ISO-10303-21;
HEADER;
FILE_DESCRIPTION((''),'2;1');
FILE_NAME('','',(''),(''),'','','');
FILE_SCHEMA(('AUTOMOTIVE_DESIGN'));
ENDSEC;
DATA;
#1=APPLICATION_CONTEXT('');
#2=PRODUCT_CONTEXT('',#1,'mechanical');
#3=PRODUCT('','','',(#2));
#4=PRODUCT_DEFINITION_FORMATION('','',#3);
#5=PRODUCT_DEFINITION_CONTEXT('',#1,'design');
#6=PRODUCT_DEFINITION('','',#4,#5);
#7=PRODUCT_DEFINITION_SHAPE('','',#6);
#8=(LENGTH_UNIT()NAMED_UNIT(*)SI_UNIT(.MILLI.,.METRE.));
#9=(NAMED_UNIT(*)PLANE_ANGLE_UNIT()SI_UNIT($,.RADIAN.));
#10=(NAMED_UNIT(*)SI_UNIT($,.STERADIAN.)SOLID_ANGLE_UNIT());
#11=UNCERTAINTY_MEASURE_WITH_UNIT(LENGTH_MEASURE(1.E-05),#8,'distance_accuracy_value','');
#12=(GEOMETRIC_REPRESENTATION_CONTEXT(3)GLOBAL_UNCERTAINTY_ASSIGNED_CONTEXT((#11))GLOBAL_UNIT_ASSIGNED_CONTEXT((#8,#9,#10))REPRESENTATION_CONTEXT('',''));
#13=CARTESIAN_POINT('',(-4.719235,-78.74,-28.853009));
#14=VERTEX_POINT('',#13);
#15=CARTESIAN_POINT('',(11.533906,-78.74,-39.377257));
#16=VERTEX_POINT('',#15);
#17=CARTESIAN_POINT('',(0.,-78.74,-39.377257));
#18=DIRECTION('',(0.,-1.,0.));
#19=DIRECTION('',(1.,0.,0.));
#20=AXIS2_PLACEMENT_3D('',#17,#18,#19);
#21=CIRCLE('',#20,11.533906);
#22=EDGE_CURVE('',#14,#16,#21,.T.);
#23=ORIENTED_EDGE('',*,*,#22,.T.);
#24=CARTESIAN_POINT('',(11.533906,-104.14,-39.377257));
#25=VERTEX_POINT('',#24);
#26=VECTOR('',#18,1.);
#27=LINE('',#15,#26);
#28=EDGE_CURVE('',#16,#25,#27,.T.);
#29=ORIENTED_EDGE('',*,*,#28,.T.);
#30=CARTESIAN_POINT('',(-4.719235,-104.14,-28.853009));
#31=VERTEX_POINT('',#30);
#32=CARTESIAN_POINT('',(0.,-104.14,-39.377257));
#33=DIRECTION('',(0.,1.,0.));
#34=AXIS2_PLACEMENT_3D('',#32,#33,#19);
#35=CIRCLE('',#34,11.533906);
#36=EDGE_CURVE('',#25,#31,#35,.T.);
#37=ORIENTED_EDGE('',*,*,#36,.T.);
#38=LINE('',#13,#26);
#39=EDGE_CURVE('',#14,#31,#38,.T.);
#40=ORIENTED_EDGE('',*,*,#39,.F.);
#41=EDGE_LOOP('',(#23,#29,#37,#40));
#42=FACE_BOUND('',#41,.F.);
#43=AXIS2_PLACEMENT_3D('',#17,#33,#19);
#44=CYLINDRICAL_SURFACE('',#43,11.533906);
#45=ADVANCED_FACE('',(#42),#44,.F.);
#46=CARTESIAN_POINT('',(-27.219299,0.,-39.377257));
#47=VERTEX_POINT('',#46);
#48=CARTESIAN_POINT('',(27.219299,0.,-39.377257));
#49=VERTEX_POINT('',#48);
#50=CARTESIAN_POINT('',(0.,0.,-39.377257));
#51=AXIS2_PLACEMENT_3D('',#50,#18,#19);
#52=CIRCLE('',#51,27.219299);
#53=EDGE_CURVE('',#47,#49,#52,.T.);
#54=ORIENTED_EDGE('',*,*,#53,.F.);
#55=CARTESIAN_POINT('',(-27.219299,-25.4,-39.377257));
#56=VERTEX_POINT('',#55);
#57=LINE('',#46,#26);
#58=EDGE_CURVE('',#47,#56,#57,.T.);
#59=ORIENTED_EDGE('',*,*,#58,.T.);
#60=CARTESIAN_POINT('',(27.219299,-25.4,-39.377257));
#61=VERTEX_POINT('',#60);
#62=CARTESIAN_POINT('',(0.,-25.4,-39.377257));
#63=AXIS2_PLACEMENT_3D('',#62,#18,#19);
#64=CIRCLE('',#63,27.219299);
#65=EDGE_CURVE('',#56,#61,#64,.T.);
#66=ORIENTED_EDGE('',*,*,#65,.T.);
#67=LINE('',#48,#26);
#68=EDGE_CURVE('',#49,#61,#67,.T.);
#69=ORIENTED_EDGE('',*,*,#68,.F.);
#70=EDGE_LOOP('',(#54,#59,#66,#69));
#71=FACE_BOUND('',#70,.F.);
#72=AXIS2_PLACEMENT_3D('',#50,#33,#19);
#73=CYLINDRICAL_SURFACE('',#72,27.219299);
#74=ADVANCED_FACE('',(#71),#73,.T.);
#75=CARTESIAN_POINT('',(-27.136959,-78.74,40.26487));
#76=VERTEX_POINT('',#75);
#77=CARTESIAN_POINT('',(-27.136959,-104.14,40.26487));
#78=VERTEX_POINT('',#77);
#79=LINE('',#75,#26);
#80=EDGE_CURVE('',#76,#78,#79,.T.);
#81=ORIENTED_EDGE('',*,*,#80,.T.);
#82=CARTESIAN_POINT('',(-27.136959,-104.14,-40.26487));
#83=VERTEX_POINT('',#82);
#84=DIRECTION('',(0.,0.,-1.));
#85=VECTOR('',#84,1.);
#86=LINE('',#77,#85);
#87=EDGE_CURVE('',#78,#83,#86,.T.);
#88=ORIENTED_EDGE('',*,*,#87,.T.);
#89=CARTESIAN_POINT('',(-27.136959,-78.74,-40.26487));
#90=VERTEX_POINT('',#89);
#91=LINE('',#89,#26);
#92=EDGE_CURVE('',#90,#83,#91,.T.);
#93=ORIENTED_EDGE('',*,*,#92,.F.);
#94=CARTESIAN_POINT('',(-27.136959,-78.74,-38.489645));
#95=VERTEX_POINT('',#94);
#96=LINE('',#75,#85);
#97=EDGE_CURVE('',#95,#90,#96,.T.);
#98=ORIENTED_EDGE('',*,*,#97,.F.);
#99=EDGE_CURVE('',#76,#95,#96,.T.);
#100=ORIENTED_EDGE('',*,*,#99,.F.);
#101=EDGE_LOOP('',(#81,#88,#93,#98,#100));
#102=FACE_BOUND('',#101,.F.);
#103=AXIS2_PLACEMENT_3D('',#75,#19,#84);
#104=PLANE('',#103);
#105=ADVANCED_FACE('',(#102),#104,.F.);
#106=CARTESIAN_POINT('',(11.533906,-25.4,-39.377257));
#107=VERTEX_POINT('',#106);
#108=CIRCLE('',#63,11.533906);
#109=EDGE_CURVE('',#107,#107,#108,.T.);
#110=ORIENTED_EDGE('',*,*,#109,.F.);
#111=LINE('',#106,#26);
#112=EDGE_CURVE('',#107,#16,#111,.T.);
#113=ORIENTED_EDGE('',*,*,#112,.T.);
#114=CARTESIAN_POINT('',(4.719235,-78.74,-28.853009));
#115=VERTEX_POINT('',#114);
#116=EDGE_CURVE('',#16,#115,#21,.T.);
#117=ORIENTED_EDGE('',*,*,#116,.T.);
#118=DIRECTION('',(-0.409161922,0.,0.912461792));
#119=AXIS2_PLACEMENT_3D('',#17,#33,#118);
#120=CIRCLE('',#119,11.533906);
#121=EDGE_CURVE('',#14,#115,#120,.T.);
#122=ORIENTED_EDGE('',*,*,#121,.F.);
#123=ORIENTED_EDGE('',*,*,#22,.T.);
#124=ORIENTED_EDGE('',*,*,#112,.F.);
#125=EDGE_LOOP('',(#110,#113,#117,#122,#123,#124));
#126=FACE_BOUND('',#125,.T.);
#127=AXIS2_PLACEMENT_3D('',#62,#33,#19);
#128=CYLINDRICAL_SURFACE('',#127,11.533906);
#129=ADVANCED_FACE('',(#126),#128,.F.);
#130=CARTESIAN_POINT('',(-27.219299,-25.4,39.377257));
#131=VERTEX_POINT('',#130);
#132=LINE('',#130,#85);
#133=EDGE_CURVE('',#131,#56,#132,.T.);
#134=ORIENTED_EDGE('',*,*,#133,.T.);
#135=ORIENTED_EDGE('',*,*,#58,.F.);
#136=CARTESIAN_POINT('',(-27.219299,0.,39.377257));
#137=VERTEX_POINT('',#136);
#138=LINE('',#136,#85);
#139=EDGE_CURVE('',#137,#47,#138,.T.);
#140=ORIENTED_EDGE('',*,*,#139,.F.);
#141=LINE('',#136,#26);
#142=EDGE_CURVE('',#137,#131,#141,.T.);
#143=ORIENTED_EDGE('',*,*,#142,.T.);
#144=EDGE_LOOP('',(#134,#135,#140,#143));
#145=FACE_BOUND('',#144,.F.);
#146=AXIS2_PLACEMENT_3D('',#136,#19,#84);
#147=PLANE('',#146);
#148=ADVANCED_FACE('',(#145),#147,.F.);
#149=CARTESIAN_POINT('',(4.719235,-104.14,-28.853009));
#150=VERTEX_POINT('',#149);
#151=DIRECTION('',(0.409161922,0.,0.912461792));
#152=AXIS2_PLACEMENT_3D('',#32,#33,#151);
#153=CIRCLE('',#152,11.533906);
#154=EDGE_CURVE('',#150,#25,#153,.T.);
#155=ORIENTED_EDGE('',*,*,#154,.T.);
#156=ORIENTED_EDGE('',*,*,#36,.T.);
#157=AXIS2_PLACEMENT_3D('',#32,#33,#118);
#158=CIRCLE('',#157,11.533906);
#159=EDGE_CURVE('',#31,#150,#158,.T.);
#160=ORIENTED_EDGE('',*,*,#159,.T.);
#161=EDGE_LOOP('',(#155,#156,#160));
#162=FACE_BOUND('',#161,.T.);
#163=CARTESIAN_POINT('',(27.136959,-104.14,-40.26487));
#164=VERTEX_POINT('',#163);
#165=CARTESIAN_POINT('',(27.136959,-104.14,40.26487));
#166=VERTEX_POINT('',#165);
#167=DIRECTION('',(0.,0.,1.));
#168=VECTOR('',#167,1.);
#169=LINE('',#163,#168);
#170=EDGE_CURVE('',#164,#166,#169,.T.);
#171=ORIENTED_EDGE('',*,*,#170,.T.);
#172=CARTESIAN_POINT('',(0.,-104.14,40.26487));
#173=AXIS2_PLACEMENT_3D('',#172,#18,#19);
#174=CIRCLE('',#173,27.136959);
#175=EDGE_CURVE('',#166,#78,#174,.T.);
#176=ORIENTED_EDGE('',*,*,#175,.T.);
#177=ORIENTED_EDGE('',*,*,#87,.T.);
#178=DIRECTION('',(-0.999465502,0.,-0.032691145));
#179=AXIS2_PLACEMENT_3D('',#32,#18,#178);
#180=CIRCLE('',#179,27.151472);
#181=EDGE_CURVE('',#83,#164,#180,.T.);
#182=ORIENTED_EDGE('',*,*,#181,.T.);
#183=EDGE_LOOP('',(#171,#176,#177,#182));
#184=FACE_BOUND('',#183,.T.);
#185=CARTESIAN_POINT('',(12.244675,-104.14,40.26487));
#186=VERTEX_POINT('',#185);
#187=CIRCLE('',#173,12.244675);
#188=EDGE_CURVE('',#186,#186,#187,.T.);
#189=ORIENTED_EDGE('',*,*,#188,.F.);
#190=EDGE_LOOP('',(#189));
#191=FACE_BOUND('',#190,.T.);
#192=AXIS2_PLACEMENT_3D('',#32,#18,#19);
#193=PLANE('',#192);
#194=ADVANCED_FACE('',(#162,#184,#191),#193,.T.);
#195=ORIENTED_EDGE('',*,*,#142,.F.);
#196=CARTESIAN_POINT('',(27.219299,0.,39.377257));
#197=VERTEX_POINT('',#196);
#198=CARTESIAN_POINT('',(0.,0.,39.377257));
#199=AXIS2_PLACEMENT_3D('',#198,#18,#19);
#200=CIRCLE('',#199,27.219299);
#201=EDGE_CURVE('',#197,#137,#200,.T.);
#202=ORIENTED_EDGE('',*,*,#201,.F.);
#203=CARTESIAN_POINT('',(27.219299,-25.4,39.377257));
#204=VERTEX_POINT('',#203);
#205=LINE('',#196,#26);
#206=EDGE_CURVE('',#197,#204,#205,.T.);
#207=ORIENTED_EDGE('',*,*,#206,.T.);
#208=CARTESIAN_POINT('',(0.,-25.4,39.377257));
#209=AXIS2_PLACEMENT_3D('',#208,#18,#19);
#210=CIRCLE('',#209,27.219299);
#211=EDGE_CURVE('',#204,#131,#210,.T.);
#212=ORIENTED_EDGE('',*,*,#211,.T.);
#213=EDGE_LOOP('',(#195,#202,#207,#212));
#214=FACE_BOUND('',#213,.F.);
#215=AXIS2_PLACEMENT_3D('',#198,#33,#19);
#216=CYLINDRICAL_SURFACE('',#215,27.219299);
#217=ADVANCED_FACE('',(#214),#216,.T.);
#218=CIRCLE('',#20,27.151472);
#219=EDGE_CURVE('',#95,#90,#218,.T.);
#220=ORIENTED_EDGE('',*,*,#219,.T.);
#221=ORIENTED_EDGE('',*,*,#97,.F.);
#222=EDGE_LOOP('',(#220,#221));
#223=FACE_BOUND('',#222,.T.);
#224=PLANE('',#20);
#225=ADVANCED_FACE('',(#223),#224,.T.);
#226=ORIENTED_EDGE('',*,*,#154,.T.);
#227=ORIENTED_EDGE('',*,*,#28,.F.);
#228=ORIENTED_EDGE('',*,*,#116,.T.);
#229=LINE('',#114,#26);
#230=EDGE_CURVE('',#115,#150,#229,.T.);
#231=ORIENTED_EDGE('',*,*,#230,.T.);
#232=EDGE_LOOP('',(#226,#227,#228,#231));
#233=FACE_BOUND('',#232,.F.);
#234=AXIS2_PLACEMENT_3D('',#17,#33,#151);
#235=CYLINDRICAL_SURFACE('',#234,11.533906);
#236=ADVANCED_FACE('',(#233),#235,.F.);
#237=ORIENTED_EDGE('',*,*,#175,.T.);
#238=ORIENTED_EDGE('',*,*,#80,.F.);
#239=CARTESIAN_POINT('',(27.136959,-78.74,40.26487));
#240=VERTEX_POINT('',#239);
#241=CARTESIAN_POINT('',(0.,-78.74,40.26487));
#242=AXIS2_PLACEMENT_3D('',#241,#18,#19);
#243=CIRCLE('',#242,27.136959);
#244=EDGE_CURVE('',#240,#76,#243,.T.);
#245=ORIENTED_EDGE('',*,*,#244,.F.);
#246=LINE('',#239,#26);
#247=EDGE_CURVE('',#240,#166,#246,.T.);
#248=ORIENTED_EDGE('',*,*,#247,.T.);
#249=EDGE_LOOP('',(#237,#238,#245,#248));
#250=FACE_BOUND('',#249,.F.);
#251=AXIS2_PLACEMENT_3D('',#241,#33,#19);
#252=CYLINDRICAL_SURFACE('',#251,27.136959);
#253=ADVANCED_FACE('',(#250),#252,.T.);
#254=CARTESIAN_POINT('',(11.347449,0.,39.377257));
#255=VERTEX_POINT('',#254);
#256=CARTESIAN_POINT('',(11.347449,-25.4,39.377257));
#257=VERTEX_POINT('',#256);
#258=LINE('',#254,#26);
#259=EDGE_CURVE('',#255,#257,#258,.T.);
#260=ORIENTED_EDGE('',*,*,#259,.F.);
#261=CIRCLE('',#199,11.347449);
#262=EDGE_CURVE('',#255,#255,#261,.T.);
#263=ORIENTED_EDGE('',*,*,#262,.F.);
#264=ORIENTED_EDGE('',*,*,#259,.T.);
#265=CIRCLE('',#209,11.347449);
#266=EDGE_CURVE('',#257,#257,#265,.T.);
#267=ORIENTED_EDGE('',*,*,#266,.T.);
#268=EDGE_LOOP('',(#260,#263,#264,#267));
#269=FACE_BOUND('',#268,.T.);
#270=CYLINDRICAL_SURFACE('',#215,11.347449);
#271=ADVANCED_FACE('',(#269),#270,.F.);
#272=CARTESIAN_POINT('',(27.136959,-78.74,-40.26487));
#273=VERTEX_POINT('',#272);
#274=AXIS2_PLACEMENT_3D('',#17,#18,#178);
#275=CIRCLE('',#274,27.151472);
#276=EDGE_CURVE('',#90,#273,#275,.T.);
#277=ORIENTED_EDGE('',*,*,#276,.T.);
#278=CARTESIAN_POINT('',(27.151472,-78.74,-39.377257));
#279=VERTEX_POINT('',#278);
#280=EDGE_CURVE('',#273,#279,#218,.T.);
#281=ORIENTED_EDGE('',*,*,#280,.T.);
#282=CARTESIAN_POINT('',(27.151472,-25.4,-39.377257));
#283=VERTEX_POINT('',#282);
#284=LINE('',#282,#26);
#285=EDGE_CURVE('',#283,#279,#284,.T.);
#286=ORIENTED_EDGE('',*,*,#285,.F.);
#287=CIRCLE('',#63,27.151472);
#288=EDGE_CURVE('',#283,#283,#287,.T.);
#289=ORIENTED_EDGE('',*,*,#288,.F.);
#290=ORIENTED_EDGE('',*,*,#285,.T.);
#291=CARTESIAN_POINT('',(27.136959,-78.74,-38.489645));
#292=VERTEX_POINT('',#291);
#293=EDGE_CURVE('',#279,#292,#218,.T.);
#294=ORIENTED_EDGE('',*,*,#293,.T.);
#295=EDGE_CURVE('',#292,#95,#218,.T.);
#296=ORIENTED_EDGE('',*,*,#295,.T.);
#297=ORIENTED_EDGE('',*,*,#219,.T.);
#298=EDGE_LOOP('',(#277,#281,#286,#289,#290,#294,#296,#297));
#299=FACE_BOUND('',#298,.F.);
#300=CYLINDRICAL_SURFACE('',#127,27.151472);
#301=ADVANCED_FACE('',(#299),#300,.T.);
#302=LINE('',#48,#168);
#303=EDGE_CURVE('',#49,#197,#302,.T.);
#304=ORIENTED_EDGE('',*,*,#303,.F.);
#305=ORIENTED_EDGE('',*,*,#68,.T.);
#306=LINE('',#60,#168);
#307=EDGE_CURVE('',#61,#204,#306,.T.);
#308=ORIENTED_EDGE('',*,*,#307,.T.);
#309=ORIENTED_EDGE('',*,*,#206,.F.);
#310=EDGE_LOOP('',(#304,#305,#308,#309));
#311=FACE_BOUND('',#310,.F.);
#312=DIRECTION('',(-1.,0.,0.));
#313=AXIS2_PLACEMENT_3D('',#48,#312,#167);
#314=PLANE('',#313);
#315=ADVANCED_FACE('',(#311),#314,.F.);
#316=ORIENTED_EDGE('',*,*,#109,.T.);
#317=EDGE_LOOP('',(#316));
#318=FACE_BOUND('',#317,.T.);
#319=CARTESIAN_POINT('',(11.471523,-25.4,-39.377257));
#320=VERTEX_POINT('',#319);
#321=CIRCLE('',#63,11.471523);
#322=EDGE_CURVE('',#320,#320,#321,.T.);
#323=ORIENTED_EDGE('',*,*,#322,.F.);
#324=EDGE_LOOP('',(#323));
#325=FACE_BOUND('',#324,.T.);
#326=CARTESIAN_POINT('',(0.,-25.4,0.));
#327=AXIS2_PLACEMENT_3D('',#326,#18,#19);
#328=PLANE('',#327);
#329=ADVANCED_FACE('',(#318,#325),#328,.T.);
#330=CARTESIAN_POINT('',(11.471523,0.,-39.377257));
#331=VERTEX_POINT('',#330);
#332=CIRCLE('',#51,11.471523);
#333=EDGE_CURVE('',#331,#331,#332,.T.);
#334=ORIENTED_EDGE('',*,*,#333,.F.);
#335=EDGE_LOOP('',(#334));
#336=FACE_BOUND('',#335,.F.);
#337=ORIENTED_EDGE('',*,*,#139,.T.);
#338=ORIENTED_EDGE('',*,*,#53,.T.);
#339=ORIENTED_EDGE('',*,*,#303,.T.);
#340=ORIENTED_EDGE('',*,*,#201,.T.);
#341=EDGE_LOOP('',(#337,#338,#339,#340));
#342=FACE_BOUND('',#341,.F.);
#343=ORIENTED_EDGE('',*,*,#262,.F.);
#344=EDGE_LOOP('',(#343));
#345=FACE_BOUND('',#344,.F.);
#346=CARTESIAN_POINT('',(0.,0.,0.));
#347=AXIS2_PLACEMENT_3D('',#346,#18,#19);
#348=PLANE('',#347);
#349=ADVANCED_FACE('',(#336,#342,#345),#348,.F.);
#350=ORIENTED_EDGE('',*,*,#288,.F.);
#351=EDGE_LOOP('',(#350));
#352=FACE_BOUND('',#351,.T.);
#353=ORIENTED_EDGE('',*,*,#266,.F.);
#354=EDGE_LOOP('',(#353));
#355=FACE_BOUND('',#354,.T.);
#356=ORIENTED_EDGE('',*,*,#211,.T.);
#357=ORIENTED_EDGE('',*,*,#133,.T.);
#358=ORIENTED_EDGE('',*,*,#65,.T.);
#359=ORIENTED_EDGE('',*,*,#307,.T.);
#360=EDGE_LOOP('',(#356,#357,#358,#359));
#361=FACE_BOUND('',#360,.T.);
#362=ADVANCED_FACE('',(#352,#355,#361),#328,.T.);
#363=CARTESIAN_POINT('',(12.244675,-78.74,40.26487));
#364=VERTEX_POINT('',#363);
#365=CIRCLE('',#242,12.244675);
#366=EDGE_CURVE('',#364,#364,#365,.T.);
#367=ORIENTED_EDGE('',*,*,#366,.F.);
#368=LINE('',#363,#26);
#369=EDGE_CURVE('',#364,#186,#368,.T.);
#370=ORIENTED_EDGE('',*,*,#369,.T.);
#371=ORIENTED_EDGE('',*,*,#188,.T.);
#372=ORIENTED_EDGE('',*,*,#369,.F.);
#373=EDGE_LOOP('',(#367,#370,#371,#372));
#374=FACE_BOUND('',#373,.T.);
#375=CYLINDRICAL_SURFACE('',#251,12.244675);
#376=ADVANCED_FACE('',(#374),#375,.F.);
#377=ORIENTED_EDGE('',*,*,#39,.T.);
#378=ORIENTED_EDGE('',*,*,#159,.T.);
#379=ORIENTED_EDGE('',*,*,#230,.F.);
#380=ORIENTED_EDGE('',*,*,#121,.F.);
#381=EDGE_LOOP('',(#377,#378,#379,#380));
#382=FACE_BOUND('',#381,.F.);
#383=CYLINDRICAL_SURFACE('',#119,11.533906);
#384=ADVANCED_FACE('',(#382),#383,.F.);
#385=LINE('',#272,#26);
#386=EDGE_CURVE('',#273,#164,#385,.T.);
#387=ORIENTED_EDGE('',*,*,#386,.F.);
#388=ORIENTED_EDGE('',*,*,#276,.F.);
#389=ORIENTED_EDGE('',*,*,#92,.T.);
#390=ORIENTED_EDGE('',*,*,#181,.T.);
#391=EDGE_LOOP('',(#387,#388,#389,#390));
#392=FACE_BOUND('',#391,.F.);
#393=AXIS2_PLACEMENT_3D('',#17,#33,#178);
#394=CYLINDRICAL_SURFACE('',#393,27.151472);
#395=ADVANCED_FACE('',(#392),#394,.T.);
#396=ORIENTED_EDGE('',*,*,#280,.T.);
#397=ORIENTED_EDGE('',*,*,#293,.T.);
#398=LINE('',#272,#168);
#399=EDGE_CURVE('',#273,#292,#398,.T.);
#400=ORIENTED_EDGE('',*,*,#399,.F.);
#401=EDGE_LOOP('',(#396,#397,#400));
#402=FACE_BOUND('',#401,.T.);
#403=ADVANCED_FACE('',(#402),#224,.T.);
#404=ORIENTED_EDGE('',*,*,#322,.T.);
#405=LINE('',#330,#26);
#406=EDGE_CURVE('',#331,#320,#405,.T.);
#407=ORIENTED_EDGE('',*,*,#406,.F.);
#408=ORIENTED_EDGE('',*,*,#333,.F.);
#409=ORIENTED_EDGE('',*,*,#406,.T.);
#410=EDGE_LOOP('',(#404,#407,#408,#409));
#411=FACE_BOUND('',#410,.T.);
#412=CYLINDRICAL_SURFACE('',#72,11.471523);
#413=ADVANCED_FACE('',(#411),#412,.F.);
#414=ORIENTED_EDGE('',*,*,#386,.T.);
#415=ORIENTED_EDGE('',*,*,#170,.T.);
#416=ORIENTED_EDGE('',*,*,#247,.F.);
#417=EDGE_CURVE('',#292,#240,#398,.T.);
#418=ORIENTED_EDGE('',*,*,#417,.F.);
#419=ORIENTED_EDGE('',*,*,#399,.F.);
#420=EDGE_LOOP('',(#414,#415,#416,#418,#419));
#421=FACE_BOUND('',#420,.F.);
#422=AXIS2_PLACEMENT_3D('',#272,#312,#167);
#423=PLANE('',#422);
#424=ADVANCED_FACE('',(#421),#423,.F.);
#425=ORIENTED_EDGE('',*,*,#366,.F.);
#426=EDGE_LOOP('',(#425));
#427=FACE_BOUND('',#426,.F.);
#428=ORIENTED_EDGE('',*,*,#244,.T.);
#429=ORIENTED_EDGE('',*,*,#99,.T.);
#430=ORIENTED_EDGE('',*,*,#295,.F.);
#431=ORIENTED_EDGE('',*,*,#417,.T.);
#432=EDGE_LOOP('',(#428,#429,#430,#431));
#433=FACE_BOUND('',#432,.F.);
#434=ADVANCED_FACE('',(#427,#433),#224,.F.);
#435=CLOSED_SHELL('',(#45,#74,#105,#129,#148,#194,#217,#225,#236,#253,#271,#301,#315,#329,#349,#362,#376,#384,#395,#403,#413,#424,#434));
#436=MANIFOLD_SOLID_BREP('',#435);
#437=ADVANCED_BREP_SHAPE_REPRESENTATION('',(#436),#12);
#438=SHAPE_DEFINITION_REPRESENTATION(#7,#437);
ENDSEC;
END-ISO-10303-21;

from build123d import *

# Parameters (mm, degrees)
F0_R     = 11.4715226447
F0_R_2   = 11.3474489307
F1_DEPTH = 25.4
F2_R     = 27.1514716213
F2_R_2   = 11.5339058998
F3_DEPTH = 53.34
F4_R     = 12.2446750111
F5_DEPTH = 25.4


with BuildPart() as f1:
    # F0 (on Front) → F1 (new body)
    with BuildSketch(Plane.XZ):
        with BuildLine():
            ThreePointArc((-27.219299227, -39.3772572279), (0, -12.1579580009), (27.219299227, -39.3772572279))
            Line((27.219299227, -39.3772572279), (27.219299227, 39.3772572279))
            ThreePointArc((27.219299227, 39.3772572279), (0, 12.1579580009), (-27.219299227, 39.3772572279))
            Line((-27.219299227, 39.3772572279), (-27.219299227, -39.3772572279))
        make_face()
        with BuildLine():
            ThreePointArc((-27.219299227, -39.3772572279), (0, -66.5965564549), (27.219299227, -39.3772572279))
            ThreePointArc((27.219299227, -39.3772572279), (0, -12.1579580009), (-27.219299227, -39.3772572279))
        make_face()
        with Locations((0, -39.3772572279)):
            Circle(F0_R, mode=Mode.SUBTRACT)
        with BuildLine():
            ThreePointArc((-27.219299227, 39.3772572279), (0, 12.1579580009), (27.219299227, 39.3772572279))
            ThreePointArc((27.219299227, 39.3772572279), (0, 66.5965564549), (-27.219299227, 39.3772572279))
        make_face()
        with Locations((0, 39.3772572279)):
            Circle(F0_R_2, mode=Mode.SUBTRACT)
    extrude(amount=F1_DEPTH)

    # F2 (on face) → F3 (join)
    with BuildSketch(Plane.XZ.offset(25.4)):
        with Locations((0, -39.3772572279)):
            Circle(F2_R)
        with Locations((0, -39.3772572279)):
            Circle(F2_R_2, mode=Mode.SUBTRACT)
    extrude(amount=F3_DEPTH)

    # F4 (on face) → F5 (join)
    with BuildSketch(Plane.XZ.offset(78.74)):
        with BuildLine():
            ThreePointArc((-27.1369592055, -40.2648699161), (0, -66.5287288492), (27.1369592055, -40.2648699161))
            Line((27.1369592055, -40.2648699161), (27.1369592055, -38.4896445397))
            ThreePointArc((27.1369592055, -38.4896445397), (0, -12.2257856066), (-27.1369592055, -38.4896445397))
            Line((-27.1369592055, -38.4896445397), (-27.1369592055, -40.2648699161))
        make_face()
        with BuildLine():
            ThreePointArc((4.719235111, -28.8530087858), (10.2659715637, -33.4010821613), (12.3491600723, -40.2648699161))
            ThreePointArc((12.3491600723, -40.2648699161), (-6.8637877548, -50.5308414798), (-4.719235111, -28.8530087858))
            ThreePointArc((-4.719235111, -28.8530087858), (0, -27.8433513281), (4.719235111, -28.8530087858))
        make_face(mode=Mode.SUBTRACT)
        with BuildLine():
            ThreePointArc((-27.1369592055, -38.4896445397), (0, -12.2257856066), (27.1369592055, -38.4896445397))
            Line((27.1369592055, -38.4896445397), (27.1369592055, 40.2648699161))
            ThreePointArc((27.1369592055, 40.2648699161), (0, 13.1279107106), (-27.1369592055, 40.2648699161))
            Line((-27.1369592055, 40.2648699161), (-27.1369592055, -38.4896445397))
        make_face()
        with BuildLine():
            ThreePointArc((-27.1369592055, 40.2648699161), (0, 13.1279107106), (27.1369592055, 40.2648699161))
            ThreePointArc((27.1369592055, 40.2648699161), (0, 67.4018291216), (-27.1369592055, 40.2648699161))
        make_face()
        with Locations((0, 40.2648699161)):
            Circle(F4_R, mode=Mode.SUBTRACT)
        with BuildLine():
            ThreePointArc((-4.719235111, -28.8530087858), (-6.8637877548, -50.5308414798), (12.3491600723, -40.2648699161))
            ThreePointArc((12.3491600723, -40.2648699161), (10.2659715637, -33.4010821613), (4.719235111, -28.8530087858))
            ThreePointArc((4.719235111, -28.8530087858), (9.6814822985, -33.1082951282), (11.5339058998, -39.3772572279))
            ThreePointArc((11.5339058998, -39.3772572279), (-6.2689620997, -49.0587395264), (-4.719235111, -28.8530087858))
        make_face()
    extrude(amount=F5_DEPTH)


solid = f1.part
